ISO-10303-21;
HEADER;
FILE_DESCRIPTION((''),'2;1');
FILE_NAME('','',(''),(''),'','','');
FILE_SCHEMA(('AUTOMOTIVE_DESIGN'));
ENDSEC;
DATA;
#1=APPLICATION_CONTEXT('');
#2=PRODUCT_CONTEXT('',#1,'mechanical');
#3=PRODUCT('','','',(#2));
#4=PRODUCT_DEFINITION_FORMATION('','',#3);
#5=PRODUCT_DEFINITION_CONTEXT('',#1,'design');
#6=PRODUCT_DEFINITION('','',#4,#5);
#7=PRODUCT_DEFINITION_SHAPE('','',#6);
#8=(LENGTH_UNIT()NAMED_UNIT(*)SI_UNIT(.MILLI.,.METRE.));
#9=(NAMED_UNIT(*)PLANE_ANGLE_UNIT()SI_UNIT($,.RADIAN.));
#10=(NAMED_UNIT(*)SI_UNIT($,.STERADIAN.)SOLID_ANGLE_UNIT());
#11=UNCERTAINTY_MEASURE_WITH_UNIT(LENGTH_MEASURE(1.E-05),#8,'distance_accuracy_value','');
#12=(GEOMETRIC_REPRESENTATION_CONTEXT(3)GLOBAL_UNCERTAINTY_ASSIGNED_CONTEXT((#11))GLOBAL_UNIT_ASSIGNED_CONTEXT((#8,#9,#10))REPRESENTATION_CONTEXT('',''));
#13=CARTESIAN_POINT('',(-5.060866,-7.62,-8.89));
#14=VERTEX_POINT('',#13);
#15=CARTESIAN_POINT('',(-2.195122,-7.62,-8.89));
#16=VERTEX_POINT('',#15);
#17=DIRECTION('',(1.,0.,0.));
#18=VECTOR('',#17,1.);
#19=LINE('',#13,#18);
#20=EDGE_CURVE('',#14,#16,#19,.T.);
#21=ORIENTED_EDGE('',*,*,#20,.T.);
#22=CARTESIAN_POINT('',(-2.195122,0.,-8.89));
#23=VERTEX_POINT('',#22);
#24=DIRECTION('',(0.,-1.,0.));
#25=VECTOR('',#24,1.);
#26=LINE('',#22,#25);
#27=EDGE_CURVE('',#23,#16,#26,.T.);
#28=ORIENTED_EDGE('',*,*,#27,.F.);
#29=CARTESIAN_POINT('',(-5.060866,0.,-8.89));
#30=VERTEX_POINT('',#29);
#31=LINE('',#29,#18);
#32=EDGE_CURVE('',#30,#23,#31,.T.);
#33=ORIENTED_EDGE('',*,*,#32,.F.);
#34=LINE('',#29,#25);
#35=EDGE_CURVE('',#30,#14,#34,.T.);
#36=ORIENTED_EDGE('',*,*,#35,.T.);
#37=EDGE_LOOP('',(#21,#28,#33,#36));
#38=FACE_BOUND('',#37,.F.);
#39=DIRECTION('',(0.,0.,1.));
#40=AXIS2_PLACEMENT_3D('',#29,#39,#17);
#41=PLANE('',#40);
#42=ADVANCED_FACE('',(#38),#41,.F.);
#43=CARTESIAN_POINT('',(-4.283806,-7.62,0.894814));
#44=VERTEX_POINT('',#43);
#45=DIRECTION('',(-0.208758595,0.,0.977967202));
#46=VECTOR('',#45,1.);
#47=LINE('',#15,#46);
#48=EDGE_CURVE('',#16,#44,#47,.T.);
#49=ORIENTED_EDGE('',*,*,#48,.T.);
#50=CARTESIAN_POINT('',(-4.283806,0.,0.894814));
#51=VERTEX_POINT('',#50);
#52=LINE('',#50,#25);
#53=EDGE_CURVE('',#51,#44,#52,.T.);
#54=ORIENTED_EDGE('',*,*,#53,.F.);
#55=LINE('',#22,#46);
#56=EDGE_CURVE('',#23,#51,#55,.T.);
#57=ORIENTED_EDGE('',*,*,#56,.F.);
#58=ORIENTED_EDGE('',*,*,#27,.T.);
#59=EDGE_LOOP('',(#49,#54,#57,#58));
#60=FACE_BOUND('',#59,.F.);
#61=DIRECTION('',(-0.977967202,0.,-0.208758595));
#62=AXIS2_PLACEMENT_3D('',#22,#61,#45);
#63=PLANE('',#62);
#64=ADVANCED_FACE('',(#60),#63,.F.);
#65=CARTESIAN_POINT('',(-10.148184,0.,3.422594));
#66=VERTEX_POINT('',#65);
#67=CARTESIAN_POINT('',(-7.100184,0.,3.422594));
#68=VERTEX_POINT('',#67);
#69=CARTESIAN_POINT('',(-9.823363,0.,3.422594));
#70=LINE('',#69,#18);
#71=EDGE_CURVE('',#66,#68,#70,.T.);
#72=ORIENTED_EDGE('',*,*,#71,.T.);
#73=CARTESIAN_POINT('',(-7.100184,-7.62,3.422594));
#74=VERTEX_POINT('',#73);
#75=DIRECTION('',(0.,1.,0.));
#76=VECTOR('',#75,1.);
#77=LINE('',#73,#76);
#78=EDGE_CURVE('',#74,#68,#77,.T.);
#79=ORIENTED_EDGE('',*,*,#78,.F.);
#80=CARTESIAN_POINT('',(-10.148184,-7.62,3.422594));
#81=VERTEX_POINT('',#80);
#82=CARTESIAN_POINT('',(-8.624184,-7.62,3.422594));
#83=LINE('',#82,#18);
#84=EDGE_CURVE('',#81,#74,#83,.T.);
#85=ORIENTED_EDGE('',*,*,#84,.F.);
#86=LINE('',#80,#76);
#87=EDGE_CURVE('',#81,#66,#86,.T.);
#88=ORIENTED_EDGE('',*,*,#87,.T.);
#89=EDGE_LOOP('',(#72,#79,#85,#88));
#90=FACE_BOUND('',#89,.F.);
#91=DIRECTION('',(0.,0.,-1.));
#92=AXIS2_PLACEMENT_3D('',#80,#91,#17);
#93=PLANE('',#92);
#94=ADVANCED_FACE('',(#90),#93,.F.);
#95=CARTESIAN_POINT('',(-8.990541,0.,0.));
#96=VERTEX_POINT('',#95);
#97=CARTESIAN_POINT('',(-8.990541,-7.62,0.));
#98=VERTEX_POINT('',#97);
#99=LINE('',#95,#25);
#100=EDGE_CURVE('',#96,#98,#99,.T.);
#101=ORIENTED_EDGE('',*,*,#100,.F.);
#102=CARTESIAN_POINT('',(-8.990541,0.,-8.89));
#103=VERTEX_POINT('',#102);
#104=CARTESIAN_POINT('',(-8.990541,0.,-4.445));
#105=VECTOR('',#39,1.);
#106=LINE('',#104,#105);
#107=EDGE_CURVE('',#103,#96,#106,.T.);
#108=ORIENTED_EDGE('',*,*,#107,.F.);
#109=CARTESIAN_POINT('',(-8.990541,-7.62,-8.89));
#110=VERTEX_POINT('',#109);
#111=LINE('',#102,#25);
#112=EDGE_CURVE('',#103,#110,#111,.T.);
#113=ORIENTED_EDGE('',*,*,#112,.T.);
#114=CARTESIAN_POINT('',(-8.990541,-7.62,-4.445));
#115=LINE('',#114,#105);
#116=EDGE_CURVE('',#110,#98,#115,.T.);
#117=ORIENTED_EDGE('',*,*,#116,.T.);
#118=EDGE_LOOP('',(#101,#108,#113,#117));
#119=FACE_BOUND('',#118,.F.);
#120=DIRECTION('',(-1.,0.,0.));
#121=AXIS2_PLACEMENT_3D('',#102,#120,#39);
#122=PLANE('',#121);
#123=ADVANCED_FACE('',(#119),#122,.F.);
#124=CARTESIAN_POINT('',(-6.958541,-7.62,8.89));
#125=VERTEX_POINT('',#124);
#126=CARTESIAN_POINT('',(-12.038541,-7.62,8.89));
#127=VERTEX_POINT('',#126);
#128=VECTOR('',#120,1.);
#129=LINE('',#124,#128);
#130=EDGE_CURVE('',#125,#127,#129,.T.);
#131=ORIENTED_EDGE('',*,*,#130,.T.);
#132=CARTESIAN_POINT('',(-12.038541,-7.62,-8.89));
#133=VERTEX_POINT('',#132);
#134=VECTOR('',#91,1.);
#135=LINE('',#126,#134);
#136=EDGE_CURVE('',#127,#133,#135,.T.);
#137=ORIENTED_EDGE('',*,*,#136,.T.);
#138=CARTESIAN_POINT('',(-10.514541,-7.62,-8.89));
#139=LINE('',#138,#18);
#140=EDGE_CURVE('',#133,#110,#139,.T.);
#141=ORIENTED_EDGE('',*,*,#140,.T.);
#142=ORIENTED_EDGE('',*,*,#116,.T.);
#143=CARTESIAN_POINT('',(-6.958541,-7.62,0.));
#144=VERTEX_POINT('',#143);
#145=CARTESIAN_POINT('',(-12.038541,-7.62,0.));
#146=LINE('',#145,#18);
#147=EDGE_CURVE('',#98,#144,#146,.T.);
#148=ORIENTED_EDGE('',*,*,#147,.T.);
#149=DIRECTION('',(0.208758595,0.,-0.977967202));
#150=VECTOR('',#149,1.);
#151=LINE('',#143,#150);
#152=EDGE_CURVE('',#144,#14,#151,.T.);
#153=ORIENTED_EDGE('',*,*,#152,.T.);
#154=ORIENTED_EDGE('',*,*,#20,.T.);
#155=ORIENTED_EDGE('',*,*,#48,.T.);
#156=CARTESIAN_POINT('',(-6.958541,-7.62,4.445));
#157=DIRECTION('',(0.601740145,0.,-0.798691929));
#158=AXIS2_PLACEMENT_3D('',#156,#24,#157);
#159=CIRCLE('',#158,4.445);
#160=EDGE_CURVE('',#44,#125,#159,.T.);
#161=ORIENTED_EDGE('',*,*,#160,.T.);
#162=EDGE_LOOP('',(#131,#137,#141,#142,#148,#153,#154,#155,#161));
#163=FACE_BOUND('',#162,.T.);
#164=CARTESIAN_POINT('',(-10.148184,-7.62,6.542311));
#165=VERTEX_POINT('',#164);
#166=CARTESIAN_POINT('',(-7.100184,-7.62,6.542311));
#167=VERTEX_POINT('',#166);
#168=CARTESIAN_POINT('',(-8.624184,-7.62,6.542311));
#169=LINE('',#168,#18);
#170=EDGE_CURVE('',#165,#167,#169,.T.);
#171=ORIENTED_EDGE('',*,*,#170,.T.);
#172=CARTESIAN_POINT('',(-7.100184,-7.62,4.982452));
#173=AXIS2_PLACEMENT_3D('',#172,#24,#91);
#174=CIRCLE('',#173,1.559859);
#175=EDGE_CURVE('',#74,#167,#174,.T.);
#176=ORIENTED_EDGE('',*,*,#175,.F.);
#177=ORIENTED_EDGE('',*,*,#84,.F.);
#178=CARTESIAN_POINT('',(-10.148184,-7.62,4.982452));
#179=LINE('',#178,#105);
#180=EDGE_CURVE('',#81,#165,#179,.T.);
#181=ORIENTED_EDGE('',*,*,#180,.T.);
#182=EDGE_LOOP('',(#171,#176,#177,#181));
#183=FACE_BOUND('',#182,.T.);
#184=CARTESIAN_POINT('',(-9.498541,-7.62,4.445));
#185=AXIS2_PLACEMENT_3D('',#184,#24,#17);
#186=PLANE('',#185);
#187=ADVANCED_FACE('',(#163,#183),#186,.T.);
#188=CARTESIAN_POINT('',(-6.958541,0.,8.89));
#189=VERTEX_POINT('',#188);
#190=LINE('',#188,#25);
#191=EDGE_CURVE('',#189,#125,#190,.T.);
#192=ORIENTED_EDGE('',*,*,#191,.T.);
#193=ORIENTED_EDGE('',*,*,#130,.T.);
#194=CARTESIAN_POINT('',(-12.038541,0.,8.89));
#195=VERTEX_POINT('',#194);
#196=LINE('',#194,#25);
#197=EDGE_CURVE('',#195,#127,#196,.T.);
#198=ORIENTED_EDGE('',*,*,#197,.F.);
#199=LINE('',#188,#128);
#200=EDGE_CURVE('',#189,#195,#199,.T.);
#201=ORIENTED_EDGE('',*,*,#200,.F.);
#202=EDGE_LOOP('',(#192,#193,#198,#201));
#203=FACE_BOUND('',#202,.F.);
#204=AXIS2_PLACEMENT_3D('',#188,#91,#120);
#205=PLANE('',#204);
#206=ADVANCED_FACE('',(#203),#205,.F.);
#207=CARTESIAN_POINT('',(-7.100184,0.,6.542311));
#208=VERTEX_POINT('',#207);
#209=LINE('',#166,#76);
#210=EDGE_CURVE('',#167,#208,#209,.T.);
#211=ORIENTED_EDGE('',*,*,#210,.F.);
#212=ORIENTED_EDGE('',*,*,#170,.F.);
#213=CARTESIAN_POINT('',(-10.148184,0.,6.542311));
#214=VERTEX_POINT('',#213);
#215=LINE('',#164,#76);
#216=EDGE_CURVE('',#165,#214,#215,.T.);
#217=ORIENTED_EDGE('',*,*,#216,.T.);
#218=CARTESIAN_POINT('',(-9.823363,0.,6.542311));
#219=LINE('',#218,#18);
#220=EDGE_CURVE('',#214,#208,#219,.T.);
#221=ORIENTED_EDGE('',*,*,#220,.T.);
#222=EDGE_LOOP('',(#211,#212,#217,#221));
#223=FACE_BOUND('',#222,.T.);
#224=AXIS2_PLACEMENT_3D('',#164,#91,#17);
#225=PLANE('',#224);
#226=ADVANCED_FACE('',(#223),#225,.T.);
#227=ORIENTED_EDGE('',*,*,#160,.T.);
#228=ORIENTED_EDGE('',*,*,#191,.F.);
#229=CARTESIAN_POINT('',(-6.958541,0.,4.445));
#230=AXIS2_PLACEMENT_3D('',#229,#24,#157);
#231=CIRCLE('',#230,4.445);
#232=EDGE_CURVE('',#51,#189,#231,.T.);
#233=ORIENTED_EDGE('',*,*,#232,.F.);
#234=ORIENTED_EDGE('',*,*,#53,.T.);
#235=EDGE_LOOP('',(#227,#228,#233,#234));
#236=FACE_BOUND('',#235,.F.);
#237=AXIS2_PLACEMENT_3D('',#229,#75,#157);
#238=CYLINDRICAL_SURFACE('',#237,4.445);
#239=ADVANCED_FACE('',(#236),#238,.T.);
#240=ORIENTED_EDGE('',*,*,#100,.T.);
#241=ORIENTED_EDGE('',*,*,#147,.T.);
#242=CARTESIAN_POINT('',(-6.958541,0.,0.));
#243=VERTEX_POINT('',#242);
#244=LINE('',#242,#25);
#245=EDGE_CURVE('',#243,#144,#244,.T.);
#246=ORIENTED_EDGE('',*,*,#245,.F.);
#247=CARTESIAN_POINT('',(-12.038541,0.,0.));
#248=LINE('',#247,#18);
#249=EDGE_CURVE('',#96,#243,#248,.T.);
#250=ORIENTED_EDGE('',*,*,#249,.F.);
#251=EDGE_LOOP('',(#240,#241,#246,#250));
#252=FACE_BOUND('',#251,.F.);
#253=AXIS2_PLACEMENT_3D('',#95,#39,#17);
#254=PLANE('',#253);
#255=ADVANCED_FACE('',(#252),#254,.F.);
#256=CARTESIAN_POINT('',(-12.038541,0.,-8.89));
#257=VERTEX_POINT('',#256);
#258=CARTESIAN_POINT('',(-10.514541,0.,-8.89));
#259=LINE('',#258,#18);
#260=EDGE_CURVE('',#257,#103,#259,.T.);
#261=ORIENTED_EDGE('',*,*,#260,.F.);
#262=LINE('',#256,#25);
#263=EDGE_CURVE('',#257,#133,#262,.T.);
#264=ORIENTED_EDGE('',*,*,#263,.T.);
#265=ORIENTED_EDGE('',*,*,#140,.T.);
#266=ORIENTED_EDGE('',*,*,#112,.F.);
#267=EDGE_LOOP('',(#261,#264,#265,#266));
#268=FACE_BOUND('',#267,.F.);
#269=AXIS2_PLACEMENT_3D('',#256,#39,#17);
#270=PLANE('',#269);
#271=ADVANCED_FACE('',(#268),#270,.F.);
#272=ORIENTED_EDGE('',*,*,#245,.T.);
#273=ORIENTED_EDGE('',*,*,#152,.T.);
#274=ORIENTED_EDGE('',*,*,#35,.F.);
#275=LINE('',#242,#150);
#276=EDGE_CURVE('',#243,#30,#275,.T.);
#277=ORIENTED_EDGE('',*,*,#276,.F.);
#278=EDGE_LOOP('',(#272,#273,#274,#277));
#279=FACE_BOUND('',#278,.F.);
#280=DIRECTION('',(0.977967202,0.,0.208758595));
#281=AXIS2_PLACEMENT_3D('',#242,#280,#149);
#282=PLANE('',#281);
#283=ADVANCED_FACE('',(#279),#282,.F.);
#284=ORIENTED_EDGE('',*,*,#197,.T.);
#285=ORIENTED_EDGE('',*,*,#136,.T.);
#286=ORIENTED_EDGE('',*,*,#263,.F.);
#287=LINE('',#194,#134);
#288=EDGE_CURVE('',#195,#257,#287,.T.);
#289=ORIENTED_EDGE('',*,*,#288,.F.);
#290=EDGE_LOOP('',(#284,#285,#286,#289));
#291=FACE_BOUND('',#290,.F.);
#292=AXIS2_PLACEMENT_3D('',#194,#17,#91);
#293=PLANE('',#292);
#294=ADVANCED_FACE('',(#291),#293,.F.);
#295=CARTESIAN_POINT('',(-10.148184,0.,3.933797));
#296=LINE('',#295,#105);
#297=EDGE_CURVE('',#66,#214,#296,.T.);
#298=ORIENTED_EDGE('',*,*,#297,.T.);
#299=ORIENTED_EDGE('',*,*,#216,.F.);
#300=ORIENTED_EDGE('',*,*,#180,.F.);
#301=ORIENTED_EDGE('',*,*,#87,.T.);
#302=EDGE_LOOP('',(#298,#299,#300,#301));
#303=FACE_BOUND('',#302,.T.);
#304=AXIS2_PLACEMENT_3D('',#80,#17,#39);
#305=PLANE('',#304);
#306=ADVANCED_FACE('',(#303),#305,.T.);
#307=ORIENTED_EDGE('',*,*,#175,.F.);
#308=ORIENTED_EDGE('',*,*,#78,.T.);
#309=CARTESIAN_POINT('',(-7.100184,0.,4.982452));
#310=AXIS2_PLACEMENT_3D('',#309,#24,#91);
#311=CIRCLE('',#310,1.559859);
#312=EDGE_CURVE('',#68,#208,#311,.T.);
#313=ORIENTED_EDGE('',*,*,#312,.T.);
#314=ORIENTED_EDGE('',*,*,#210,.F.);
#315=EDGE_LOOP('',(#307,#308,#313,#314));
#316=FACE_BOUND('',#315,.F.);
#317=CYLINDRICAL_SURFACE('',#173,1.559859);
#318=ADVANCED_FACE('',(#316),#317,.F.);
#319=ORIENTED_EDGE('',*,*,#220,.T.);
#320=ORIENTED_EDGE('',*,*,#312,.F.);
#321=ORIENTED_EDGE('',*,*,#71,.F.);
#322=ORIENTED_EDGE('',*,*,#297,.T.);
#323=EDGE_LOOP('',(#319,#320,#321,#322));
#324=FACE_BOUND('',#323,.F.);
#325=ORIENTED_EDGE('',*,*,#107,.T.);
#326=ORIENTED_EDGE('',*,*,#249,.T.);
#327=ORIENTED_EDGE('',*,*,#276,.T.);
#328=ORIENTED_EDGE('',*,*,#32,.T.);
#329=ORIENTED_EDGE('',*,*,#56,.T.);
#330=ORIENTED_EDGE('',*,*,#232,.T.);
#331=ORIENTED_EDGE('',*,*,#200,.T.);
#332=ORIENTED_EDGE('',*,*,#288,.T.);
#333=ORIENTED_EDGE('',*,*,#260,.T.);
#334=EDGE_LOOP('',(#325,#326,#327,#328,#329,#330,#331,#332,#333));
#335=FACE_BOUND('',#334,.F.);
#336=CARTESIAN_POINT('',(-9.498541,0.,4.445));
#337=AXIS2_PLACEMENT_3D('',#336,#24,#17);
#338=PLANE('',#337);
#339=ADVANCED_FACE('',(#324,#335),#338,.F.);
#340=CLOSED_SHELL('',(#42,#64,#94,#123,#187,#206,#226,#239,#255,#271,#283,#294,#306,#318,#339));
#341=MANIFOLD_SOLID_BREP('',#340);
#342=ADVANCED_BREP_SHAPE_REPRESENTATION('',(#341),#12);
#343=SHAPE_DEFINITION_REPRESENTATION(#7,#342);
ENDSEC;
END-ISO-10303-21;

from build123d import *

# Parameters (mm, degrees)
F0_W     = 3.048
F0_H     = 8.89
F1_DEPTH = 7.62
F2_DEPTH = 7.62
F3_W     = 3.048
F3_H     = 3.1197171271
F4_DEPTH = 25.4


# Not quite as in the source:
# - a feature names something its author has since deleted; it is built from what else it names


with BuildPart() as f1:
    # F0 (on Front) → F1 (new body)
    with BuildSketch(Plane.XZ):
        Polygon((-6.9585410112, 8.89), (-12.0385410112, 8.89), (-12.0385410112, 0), (-8.9905410112, 0), (-6.9585410112, 0), align=None)
        with BuildLine():
            ThreePointArc((-4.2838060673, 0.8948143739), (-2.7431762518, 5.8552215946), (-6.9585410112, 8.89))
            Line((-6.9585410112, 8.89), (-6.9585410112, 0))
            ThreePointArc((-6.9585410112, 0), (-5.5483194165, 0.2296352407), (-4.2838060673, 0.8948143739))
        make_face()
        with Locations((-10.5145410112, -4.445)):
            Rectangle(F0_W, F0_H)
    extrude(amount=F1_DEPTH)

    # F0 (on Front) → F2 (join)
    with BuildSketch(Plane.XZ):
        Polygon((-6.9585410112, 8.89), (-12.0385410112, 8.89), (-12.0385410112, 0), (-8.9905410112, 0), (-6.9585410112, 0), align=None)
        with BuildLine():
            ThreePointArc((-4.2838060673, 0.8948143739), (-2.7431762518, 5.8552215946), (-6.9585410112, 8.89))
            Line((-6.9585410112, 8.89), (-6.9585410112, 0))
            ThreePointArc((-6.9585410112, 0), (-5.5483194165, 0.2296352407), (-4.2838060673, 0.8948143739))
        make_face()
        with Locations((-10.5145410112, -4.445)):
            Rectangle(F0_W, F0_H)
        with BuildLine():
            ThreePointArc((-4.2838060673, 0.8948143739), (-5.5483194165, 0.2296352407), (-6.9585410112, 0))
            Line((-6.9585410112, 0), (-5.0608660094, -8.89))
            Line((-5.0608660094, -8.89), (-2.1951224189, -8.89))
            Line((-2.1951224189, -8.89), (-4.2838060673, 0.8948143739))
        make_face()
    extrude(amount=F2_DEPTH)

    # F3 (on face) → F4 (cut)
    with BuildSketch(Plane.XZ.offset(7.62)):
        with Locations((-8.624184413, 4.9824524904)):
            Rectangle(F3_W, F3_H)
        with BuildLine():
            ThreePointArc((-7.100184413, 3.4225939268), (-5.5403258494, 4.9824524904), (-7.100184413, 6.5423110539))
            Line((-7.100184413, 6.5423110539), (-7.100184413, 3.4225939268))
        make_face()
    extrude(amount=-F4_DEPTH, mode=Mode.SUBTRACT)


solid = f1.part
